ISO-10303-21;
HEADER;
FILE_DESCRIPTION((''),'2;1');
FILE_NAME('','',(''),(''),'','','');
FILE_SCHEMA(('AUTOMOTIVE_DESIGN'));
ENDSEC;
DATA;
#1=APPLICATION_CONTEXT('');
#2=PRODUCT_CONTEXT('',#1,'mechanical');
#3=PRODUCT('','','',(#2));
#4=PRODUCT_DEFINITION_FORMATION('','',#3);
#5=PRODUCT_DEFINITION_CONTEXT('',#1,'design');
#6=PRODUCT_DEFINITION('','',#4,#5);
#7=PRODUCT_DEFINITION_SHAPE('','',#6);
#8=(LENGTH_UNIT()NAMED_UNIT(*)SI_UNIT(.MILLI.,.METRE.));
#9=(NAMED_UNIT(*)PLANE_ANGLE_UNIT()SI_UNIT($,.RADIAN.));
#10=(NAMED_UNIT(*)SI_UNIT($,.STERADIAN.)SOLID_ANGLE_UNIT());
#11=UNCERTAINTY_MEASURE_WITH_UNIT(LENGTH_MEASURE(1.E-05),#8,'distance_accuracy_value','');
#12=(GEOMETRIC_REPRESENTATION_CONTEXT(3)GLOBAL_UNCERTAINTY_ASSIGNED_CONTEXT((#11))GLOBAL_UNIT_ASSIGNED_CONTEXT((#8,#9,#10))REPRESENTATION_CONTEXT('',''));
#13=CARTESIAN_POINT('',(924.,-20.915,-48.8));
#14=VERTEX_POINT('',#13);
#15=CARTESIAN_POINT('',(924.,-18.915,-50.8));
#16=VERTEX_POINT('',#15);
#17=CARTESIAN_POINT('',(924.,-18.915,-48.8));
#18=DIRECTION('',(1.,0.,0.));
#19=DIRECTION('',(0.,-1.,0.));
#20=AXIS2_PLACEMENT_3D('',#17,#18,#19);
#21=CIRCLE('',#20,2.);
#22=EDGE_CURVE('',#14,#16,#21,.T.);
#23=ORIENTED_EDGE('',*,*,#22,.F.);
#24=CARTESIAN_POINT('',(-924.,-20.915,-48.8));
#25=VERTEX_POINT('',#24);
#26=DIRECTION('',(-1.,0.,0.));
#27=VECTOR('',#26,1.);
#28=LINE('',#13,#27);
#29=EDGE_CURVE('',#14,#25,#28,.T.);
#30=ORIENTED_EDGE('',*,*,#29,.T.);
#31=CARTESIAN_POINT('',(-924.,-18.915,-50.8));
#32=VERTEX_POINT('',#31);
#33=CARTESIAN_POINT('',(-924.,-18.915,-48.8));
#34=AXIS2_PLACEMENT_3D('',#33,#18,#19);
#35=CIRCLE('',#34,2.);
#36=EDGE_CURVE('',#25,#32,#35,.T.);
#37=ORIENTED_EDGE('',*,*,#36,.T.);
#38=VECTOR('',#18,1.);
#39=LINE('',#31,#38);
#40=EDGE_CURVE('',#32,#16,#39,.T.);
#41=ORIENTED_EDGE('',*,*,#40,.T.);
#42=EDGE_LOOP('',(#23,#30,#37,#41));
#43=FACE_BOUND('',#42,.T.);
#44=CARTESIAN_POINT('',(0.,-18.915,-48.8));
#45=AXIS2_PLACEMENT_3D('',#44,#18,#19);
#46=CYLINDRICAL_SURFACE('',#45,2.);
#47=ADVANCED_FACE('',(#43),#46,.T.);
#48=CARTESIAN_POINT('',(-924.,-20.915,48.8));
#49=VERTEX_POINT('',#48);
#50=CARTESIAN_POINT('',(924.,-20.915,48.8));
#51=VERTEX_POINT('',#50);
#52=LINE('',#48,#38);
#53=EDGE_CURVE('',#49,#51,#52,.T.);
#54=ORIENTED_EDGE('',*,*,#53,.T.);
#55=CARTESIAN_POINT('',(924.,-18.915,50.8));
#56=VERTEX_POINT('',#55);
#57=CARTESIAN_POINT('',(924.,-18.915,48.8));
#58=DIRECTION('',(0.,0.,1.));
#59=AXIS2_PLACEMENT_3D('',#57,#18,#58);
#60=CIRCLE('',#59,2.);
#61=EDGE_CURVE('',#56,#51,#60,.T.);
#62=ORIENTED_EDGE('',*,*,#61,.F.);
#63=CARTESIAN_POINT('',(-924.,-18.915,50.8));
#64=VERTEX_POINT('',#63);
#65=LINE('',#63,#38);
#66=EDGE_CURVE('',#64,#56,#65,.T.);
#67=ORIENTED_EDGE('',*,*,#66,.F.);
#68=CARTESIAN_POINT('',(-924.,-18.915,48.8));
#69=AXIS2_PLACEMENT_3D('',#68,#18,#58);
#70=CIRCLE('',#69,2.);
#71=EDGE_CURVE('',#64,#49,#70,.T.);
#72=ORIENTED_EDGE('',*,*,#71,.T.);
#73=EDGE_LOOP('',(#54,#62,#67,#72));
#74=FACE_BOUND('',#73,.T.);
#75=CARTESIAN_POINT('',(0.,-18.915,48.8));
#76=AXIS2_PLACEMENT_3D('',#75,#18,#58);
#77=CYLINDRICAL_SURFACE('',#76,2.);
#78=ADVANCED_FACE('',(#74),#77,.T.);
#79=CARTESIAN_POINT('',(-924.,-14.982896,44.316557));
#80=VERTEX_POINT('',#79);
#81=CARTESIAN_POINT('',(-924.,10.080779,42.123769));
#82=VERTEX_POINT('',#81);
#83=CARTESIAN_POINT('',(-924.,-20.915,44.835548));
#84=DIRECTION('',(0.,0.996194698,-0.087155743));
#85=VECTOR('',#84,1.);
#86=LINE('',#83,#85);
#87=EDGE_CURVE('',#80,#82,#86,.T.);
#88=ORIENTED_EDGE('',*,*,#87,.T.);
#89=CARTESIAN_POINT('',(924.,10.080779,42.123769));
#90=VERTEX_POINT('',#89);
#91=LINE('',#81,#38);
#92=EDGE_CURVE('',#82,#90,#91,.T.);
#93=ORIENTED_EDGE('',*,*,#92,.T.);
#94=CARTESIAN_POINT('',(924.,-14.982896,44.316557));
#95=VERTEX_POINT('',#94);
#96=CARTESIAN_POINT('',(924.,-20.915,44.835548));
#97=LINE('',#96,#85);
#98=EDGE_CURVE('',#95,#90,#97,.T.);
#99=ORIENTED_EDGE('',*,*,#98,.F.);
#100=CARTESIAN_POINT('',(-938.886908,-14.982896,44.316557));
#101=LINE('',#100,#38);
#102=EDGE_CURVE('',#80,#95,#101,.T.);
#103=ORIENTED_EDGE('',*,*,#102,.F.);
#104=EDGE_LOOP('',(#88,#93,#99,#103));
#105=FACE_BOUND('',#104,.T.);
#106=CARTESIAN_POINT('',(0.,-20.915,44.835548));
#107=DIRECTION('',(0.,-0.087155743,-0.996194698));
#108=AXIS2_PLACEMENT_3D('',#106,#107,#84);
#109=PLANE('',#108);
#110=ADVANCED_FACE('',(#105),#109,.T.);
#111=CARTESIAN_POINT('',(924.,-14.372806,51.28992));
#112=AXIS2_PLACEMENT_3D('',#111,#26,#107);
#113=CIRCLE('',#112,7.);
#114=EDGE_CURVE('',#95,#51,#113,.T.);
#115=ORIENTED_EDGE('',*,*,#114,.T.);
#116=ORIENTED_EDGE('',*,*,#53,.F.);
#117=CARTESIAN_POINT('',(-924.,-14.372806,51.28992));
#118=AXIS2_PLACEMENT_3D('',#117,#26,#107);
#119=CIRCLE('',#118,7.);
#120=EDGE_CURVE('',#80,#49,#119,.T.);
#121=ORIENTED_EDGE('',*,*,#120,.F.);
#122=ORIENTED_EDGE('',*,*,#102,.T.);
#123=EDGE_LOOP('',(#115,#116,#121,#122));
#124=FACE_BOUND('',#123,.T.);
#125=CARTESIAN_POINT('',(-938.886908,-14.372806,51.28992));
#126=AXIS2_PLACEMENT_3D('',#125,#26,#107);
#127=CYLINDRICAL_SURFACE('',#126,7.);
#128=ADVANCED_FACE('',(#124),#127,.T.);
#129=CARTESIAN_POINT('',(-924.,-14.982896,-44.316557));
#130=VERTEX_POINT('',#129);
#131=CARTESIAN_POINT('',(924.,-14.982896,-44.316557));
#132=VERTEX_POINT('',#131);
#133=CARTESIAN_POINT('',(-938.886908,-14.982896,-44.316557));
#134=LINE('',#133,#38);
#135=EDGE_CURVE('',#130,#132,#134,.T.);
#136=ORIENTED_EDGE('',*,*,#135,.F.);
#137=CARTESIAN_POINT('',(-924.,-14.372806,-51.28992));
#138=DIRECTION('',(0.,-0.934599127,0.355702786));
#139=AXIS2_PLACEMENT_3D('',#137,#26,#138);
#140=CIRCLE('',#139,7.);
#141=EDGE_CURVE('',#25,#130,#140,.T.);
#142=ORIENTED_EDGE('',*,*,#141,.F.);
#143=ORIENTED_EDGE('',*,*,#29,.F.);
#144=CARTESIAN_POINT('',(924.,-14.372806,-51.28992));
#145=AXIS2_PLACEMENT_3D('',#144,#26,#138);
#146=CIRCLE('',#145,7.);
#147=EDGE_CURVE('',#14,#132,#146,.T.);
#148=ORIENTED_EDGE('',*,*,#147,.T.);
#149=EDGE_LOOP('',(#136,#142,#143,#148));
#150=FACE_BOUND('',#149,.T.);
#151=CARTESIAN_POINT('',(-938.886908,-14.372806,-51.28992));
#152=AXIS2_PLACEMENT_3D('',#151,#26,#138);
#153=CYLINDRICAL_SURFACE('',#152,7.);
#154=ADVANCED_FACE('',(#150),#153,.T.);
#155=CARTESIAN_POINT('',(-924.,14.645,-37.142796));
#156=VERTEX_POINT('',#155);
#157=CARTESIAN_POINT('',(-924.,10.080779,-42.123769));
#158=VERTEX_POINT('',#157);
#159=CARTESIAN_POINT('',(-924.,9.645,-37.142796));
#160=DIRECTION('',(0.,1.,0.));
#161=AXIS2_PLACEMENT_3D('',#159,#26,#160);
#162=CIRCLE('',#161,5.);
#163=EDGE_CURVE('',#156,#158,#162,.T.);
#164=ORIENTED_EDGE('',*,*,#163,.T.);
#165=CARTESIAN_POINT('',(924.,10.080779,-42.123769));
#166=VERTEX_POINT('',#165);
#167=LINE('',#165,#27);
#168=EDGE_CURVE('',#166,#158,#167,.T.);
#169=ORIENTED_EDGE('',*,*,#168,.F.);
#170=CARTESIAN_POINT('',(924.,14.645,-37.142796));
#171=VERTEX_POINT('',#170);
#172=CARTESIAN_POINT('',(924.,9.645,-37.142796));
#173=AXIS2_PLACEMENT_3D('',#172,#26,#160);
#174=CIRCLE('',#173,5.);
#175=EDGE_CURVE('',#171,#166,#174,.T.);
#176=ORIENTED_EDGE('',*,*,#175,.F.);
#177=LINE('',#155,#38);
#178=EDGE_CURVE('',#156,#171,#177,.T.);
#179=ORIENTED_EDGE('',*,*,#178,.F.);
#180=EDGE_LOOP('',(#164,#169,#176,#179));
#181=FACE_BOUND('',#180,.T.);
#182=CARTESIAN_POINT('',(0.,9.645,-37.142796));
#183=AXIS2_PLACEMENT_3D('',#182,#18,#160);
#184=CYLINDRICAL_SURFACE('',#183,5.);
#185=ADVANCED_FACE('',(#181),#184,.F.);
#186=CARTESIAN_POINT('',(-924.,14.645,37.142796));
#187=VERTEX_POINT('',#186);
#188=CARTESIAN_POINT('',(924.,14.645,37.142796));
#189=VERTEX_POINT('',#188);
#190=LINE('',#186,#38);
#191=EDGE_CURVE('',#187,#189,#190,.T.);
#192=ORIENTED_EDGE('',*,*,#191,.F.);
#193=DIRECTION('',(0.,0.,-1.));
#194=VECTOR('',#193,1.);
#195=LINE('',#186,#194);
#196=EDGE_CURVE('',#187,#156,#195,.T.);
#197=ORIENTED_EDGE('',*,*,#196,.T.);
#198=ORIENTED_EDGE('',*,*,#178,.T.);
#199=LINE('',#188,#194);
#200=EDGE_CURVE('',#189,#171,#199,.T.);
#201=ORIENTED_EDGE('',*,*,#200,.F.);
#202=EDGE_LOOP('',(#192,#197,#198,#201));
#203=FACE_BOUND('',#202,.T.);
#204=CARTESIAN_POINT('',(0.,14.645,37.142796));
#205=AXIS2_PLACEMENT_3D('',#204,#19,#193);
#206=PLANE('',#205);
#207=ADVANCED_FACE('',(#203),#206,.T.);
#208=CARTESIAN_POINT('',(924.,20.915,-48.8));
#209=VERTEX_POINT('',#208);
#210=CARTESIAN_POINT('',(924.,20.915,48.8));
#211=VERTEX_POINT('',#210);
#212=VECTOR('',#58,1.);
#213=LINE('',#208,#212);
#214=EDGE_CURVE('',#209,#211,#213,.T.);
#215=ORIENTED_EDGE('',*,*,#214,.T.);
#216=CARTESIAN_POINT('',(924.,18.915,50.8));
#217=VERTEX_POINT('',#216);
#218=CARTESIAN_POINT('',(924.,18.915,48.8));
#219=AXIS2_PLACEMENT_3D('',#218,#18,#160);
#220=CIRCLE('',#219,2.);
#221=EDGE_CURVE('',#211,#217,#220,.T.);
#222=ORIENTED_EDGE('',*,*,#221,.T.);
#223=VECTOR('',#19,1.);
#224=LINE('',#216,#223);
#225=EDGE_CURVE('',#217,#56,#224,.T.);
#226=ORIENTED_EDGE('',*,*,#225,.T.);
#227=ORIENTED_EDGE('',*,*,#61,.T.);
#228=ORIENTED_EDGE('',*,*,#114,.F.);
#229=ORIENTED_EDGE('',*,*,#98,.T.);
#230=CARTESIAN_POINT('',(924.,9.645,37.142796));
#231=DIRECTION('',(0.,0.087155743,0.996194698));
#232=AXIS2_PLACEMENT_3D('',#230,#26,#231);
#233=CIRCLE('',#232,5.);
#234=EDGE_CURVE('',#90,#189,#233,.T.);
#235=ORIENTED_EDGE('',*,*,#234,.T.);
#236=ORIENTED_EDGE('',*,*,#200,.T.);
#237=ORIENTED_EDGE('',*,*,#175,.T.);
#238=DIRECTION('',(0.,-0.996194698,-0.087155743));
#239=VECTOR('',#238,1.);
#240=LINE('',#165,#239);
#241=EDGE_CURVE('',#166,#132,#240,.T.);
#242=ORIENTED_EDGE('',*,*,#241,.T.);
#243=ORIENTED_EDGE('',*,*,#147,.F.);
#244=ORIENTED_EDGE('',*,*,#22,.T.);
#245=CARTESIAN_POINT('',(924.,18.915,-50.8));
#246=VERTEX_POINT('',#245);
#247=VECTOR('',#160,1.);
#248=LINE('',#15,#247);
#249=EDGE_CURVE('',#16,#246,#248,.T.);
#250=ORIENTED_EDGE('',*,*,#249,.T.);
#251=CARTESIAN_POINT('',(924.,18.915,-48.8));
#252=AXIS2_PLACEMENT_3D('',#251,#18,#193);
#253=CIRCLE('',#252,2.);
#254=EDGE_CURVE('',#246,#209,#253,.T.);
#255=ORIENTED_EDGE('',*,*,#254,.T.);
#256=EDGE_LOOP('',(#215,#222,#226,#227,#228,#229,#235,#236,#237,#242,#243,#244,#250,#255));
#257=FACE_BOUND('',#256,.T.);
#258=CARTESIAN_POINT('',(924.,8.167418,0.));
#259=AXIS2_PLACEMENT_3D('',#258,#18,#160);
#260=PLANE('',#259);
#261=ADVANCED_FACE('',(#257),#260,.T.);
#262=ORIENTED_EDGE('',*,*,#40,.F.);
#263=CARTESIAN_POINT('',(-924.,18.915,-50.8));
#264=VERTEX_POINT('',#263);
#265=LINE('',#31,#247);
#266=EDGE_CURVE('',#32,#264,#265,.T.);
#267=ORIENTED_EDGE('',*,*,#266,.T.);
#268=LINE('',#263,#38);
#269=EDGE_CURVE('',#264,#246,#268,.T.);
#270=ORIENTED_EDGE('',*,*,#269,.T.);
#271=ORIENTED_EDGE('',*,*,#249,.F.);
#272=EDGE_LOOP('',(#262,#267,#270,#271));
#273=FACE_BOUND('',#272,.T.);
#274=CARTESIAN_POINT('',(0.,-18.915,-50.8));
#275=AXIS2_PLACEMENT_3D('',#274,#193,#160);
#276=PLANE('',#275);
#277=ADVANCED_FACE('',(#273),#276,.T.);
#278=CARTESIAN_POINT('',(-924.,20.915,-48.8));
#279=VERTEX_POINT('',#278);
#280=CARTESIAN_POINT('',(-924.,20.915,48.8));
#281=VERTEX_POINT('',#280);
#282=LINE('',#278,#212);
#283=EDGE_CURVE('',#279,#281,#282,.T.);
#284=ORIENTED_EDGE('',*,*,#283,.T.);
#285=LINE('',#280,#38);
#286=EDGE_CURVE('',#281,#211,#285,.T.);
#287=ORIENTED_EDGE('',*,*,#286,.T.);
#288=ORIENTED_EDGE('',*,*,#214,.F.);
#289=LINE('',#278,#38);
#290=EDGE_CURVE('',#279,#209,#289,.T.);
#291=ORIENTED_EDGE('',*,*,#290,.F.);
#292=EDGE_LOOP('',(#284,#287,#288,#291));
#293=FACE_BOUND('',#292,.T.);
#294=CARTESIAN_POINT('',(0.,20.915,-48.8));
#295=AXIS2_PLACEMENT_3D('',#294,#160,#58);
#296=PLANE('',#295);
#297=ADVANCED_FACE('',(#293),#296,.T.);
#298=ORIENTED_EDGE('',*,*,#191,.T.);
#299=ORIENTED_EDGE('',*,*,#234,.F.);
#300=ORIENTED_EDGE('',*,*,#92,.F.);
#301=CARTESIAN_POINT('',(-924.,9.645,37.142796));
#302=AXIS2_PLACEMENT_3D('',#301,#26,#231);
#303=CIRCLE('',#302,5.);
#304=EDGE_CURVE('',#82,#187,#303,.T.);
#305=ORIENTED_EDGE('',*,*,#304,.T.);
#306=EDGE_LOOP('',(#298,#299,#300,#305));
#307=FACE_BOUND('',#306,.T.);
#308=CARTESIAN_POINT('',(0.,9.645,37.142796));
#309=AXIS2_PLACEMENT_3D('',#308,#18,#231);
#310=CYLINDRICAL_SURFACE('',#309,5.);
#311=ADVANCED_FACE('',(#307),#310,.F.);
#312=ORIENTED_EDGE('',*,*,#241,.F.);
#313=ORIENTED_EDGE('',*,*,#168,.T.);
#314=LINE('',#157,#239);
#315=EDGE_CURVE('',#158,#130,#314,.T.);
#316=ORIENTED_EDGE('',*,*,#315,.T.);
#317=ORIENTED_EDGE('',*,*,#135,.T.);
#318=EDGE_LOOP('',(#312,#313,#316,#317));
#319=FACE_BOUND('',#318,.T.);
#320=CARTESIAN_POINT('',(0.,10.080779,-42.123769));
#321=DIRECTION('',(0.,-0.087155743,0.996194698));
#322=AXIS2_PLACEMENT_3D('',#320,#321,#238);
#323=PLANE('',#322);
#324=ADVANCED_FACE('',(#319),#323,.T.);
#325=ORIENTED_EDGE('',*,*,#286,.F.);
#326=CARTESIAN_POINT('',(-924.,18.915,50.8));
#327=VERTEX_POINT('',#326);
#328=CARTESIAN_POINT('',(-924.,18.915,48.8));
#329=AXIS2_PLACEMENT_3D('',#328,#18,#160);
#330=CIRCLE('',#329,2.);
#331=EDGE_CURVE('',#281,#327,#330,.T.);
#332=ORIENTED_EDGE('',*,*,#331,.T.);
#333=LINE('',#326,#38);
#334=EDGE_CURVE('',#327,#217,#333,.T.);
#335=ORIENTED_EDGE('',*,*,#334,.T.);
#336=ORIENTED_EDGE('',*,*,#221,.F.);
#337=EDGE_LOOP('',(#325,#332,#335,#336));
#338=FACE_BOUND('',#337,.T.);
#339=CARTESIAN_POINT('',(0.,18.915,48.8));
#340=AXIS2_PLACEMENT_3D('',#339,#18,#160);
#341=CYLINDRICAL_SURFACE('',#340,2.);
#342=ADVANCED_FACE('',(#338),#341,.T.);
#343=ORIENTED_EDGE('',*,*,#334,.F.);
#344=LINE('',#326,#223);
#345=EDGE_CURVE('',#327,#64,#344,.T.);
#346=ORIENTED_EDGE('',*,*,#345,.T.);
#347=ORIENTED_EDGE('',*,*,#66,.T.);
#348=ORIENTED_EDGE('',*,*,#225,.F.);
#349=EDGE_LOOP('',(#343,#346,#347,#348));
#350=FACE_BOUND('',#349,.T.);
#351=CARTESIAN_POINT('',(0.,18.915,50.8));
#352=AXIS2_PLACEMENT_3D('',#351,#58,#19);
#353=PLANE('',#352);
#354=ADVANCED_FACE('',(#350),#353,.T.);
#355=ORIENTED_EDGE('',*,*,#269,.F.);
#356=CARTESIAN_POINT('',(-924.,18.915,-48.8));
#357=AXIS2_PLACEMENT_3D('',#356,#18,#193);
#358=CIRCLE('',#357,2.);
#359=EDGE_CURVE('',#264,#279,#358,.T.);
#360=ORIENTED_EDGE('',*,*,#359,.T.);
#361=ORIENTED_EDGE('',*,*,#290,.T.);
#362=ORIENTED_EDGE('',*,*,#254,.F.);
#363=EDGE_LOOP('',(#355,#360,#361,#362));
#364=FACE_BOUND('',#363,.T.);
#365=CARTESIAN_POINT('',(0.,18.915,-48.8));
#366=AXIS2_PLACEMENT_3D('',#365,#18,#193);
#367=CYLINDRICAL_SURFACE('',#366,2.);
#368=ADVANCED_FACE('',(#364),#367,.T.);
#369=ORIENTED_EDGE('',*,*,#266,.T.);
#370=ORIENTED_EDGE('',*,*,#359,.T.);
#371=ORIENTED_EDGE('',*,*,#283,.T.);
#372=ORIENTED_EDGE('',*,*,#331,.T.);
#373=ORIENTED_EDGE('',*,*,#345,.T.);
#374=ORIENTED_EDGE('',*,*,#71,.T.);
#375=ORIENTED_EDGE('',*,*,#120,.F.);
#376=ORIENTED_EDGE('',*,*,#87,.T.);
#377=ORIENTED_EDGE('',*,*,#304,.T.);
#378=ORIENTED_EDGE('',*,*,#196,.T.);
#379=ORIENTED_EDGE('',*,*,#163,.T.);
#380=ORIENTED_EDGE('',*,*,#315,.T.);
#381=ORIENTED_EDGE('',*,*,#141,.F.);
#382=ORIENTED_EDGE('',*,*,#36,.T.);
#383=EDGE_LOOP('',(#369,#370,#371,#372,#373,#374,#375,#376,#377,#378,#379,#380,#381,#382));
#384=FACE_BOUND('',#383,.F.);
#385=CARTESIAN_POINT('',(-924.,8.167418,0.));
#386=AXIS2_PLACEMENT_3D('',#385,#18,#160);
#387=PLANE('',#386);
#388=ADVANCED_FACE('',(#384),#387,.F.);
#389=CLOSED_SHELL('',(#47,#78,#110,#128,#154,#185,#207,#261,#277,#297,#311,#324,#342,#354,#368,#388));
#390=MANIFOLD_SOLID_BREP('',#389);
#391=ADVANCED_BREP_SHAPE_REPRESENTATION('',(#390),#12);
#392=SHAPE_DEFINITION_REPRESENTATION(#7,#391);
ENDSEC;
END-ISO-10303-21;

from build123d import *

# Parameters (mm, degrees)
F1_DEPTH    = 924
F2_T1_DEPTH = 1877.7738168108


# Not quite as in the source:
# - a fillet or chamfer that OpenCascade refuses, or shapes differently, is made with other operations: its cross-section is extruded or revolved along the edge and cut away or added


with BuildPart() as f1:
    # F0 (on Right) → F1 (new body, symmetric)
    with BuildSketch(Plane.YZ):
        with BuildLine():
            ThreePointArc((-20.915, -48.8), (-20.3292135624, -50.2142135624), (-18.915, -50.8))
            Line((-18.915, -50.8), (18.915, -50.8))
            ThreePointArc((18.915, -50.8), (20.3292135624, -50.2142135624), (20.915, -48.8))
            Line((20.915, -48.8), (20.915, 48.8))
            ThreePointArc((20.915, 48.8), (20.3292135624, 50.2142135624), (18.915, 50.8))
            Line((18.915, 50.8), (-18.915, 50.8))
            ThreePointArc((-18.915, 50.8), (-20.3292135624, 50.2142135624), (-20.915, 48.8))
            Line((-20.915, 48.8), (-20.915, 44.8355484375))
            Line((-20.915, 44.8355484375), (10.0807787137, 42.1237691829))
            ThreePointArc((10.0807787137, 42.1237691829), (13.3313866841, 40.5207467305), (14.645, 37.1427956924))
            Line((14.645, 37.1427956924), (14.645, -37.1427956924))
            ThreePointArc((14.645, -37.1427956924), (13.3313866841, -40.5207467305), (10.0807787137, -42.1237691829))
            Line((10.0807787137, -42.1237691829), (-20.915, -44.8355484375))
            Line((-20.915, -44.8355484375), (-20.915, -48.8))
        make_face()
    extrude(amount=F1_DEPTH, both=True)

    # F2: fillet of radius 7 on 2 edges, made by hand

    # F2_s2 → F2_t1 (cut)
    with BuildSketch(Plane.YZ.offset(-938.8869084054)):
        with BuildLine():
            ThreePointArc((-20.915, -48.8), (-18.5934823683, -45.7054865005), (-14.9828963102, -44.3165566138))
            Line((-14.9828963102, -44.3165566138), (-14.9950981142, -44.177089356))
            Line((-14.9950981142, -44.177089356), (-20.927201804, -44.6960811798))
            Line((-20.927201804, -44.6960811798), (-21.055, -44.8355484375))
            ThreePointArc((-21.055, -44.8355484375), (-21.055, -46.8177742187), (-21.0458438778, -48.75020161))
            Line((-21.0458438778, -48.75020161), (-20.915, -48.8))
        make_face()
        with BuildLine():
            ThreePointArc((-14.9828963102, 44.3165566138), (-18.5934823683, 45.7054865005), (-20.915, 48.8))
            Line((-20.915, 48.8), (-21.0458438778, 48.75020161))
            ThreePointArc((-21.0458438778, 48.75020161), (-21.055, 46.8177742187), (-21.055, 44.8355484375))
            Line((-21.055, 44.8355484375), (-20.927201804, 44.6960811798))
            Line((-20.927201804, 44.6960811798), (-14.9950981142, 44.177089356))
            Line((-14.9950981142, 44.177089356), (-14.9828963102, 44.3165566138))
        make_face()
    extrude(amount=F2_T1_DEPTH, mode=Mode.SUBTRACT)


solid = f1.part
